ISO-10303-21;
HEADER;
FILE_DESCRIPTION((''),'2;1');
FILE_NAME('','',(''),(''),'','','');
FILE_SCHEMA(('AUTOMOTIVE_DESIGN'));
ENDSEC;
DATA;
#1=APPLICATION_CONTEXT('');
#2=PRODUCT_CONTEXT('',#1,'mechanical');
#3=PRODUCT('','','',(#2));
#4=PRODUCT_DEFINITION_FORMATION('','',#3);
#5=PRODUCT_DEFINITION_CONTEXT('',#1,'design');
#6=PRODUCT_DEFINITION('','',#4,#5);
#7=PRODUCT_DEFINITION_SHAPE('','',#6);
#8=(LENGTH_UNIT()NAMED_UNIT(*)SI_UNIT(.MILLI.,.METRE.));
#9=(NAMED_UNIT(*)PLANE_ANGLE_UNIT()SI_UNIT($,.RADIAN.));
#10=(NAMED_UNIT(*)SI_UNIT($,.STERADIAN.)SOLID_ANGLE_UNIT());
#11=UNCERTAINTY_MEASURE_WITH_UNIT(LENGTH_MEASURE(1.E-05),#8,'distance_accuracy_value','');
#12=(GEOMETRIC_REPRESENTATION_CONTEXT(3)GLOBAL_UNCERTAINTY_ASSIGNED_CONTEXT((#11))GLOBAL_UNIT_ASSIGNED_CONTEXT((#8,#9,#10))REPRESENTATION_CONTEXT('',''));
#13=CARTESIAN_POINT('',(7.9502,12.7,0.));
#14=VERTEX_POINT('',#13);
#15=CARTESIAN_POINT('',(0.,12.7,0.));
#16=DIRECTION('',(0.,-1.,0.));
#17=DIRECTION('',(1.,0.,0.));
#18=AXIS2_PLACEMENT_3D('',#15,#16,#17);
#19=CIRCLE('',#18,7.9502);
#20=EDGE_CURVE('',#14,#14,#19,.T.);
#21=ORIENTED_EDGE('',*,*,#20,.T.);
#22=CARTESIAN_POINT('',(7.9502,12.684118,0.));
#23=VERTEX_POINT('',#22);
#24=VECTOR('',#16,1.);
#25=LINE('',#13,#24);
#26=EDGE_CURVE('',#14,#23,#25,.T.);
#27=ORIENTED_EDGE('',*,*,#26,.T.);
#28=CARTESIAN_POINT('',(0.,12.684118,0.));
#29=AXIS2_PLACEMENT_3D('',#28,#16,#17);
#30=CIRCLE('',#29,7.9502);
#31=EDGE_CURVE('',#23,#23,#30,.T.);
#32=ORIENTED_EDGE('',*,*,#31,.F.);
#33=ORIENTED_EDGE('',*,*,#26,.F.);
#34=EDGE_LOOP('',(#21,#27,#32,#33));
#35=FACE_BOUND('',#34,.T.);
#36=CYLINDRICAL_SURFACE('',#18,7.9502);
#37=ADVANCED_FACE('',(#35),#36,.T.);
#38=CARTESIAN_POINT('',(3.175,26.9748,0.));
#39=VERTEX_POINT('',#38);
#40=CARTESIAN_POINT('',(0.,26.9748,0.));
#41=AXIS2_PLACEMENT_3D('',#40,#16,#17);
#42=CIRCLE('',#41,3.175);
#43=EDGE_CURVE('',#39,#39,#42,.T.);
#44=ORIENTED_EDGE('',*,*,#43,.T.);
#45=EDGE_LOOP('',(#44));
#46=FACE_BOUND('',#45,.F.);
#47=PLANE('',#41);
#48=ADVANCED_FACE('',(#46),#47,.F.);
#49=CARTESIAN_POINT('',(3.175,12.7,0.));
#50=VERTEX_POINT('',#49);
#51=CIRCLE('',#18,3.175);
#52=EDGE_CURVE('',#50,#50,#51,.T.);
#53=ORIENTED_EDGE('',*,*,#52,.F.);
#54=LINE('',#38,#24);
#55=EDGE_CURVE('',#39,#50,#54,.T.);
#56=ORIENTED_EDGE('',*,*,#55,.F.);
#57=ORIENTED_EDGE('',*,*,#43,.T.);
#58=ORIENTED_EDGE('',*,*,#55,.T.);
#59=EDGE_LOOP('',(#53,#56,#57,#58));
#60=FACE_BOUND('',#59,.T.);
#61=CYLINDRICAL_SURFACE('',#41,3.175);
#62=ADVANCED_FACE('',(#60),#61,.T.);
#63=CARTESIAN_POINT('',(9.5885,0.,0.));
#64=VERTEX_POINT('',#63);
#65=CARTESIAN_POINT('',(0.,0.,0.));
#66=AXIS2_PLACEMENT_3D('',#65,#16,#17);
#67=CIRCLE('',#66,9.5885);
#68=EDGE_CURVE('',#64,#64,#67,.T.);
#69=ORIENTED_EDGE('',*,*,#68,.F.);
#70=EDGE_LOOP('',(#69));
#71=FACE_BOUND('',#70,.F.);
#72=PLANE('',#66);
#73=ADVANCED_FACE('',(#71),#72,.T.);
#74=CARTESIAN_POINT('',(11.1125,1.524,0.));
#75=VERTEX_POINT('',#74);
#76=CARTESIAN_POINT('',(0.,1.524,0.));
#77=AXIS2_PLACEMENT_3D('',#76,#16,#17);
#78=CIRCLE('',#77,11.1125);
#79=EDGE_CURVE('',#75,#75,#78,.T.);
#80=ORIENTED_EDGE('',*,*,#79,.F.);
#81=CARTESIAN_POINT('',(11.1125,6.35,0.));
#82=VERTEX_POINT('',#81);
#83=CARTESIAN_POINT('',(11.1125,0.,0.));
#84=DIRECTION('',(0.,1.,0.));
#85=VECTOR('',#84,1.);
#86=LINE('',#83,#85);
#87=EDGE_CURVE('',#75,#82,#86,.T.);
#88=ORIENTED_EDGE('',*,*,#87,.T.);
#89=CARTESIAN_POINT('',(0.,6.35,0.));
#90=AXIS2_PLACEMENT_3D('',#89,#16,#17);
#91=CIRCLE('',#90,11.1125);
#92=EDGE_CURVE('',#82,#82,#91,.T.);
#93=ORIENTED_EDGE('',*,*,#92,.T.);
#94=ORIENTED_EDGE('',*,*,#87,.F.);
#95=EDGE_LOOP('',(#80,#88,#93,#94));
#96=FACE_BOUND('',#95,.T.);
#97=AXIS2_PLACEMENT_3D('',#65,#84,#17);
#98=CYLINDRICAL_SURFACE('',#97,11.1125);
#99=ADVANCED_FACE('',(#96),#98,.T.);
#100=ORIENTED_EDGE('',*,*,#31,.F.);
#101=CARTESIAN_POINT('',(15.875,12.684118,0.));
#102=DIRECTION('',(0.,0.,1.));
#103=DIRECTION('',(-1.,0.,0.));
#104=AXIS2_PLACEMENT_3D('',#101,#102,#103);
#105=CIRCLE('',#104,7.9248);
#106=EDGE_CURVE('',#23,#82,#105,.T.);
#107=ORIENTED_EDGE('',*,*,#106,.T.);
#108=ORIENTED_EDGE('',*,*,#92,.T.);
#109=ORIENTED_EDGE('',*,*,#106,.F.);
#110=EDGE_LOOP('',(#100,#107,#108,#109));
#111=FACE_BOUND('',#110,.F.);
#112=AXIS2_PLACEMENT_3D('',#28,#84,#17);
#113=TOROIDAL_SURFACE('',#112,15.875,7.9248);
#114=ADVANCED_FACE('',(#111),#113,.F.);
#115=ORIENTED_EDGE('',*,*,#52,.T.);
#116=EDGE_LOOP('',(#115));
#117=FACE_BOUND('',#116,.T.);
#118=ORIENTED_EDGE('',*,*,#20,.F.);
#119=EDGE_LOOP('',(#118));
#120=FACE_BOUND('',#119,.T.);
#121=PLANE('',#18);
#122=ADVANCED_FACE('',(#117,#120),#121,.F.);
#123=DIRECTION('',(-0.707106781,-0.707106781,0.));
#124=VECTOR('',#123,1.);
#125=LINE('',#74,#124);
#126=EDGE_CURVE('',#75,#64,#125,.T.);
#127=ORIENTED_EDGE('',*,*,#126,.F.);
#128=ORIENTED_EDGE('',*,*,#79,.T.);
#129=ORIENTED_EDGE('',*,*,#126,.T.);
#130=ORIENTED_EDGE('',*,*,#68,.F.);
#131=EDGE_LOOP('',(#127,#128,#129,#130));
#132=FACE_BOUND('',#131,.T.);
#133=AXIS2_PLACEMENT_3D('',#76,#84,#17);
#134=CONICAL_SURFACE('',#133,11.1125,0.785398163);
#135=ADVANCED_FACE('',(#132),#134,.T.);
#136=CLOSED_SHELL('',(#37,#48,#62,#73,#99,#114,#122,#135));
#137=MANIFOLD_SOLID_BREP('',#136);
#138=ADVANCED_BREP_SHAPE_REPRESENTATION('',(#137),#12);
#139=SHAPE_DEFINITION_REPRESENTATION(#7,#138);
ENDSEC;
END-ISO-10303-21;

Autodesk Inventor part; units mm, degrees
ref_plane "YZ Plane" through (0, 0, 0) normal (1, 0, 0) x (0, 1, 0)
ref_plane "XZ Plane" through (0, 0, 0) normal (0, 1, 0) x (-1, 0, 0)
ref_plane "XY Plane" through (0, 0, 0) normal (0, 0, 1) x (1, 0, 0)
sketch "Sketch1" plane through (0, 0, 0) normal (0, 0, 1) x (1, 0, 0)
  line L0 (0, 0) -> (11.1125, 0)
  line L1 (11.1125, 0) -> (11.1125, 6.35)
  line L2 (3.175, 26.9748) -> (0, 26.9748)
  line L3 (0, 26.9748) -> (0, 0)
  line L4 (3.175, 26.9748) -> (3.175, 12.7)
  line L5 (3.175, 12.7) -> (7.9502, 12.7)
  line L6 (7.9502, 12.7) -> (7.9502, 6.35)
  line L7 (7.9502, 6.35) -> (11.1125, 6.35)
  dimension "d2" = 3.175
  dimension "d3" = 7.9502
revolve "Revolution1" add sketch "Sketch1" angle 360 about axis through (0, 26.9748, 0) along (0, -1, 0)
fillet "Fillet1" radius 7.9248 1 edges at (-7.9502, 6.35, 0)
chamfer "Chamfer1" distance 1.524 angle 45 1 edges at (-11.1125, 0, 0)
properties part number "Rack Pad" material "Stainless Steel"
